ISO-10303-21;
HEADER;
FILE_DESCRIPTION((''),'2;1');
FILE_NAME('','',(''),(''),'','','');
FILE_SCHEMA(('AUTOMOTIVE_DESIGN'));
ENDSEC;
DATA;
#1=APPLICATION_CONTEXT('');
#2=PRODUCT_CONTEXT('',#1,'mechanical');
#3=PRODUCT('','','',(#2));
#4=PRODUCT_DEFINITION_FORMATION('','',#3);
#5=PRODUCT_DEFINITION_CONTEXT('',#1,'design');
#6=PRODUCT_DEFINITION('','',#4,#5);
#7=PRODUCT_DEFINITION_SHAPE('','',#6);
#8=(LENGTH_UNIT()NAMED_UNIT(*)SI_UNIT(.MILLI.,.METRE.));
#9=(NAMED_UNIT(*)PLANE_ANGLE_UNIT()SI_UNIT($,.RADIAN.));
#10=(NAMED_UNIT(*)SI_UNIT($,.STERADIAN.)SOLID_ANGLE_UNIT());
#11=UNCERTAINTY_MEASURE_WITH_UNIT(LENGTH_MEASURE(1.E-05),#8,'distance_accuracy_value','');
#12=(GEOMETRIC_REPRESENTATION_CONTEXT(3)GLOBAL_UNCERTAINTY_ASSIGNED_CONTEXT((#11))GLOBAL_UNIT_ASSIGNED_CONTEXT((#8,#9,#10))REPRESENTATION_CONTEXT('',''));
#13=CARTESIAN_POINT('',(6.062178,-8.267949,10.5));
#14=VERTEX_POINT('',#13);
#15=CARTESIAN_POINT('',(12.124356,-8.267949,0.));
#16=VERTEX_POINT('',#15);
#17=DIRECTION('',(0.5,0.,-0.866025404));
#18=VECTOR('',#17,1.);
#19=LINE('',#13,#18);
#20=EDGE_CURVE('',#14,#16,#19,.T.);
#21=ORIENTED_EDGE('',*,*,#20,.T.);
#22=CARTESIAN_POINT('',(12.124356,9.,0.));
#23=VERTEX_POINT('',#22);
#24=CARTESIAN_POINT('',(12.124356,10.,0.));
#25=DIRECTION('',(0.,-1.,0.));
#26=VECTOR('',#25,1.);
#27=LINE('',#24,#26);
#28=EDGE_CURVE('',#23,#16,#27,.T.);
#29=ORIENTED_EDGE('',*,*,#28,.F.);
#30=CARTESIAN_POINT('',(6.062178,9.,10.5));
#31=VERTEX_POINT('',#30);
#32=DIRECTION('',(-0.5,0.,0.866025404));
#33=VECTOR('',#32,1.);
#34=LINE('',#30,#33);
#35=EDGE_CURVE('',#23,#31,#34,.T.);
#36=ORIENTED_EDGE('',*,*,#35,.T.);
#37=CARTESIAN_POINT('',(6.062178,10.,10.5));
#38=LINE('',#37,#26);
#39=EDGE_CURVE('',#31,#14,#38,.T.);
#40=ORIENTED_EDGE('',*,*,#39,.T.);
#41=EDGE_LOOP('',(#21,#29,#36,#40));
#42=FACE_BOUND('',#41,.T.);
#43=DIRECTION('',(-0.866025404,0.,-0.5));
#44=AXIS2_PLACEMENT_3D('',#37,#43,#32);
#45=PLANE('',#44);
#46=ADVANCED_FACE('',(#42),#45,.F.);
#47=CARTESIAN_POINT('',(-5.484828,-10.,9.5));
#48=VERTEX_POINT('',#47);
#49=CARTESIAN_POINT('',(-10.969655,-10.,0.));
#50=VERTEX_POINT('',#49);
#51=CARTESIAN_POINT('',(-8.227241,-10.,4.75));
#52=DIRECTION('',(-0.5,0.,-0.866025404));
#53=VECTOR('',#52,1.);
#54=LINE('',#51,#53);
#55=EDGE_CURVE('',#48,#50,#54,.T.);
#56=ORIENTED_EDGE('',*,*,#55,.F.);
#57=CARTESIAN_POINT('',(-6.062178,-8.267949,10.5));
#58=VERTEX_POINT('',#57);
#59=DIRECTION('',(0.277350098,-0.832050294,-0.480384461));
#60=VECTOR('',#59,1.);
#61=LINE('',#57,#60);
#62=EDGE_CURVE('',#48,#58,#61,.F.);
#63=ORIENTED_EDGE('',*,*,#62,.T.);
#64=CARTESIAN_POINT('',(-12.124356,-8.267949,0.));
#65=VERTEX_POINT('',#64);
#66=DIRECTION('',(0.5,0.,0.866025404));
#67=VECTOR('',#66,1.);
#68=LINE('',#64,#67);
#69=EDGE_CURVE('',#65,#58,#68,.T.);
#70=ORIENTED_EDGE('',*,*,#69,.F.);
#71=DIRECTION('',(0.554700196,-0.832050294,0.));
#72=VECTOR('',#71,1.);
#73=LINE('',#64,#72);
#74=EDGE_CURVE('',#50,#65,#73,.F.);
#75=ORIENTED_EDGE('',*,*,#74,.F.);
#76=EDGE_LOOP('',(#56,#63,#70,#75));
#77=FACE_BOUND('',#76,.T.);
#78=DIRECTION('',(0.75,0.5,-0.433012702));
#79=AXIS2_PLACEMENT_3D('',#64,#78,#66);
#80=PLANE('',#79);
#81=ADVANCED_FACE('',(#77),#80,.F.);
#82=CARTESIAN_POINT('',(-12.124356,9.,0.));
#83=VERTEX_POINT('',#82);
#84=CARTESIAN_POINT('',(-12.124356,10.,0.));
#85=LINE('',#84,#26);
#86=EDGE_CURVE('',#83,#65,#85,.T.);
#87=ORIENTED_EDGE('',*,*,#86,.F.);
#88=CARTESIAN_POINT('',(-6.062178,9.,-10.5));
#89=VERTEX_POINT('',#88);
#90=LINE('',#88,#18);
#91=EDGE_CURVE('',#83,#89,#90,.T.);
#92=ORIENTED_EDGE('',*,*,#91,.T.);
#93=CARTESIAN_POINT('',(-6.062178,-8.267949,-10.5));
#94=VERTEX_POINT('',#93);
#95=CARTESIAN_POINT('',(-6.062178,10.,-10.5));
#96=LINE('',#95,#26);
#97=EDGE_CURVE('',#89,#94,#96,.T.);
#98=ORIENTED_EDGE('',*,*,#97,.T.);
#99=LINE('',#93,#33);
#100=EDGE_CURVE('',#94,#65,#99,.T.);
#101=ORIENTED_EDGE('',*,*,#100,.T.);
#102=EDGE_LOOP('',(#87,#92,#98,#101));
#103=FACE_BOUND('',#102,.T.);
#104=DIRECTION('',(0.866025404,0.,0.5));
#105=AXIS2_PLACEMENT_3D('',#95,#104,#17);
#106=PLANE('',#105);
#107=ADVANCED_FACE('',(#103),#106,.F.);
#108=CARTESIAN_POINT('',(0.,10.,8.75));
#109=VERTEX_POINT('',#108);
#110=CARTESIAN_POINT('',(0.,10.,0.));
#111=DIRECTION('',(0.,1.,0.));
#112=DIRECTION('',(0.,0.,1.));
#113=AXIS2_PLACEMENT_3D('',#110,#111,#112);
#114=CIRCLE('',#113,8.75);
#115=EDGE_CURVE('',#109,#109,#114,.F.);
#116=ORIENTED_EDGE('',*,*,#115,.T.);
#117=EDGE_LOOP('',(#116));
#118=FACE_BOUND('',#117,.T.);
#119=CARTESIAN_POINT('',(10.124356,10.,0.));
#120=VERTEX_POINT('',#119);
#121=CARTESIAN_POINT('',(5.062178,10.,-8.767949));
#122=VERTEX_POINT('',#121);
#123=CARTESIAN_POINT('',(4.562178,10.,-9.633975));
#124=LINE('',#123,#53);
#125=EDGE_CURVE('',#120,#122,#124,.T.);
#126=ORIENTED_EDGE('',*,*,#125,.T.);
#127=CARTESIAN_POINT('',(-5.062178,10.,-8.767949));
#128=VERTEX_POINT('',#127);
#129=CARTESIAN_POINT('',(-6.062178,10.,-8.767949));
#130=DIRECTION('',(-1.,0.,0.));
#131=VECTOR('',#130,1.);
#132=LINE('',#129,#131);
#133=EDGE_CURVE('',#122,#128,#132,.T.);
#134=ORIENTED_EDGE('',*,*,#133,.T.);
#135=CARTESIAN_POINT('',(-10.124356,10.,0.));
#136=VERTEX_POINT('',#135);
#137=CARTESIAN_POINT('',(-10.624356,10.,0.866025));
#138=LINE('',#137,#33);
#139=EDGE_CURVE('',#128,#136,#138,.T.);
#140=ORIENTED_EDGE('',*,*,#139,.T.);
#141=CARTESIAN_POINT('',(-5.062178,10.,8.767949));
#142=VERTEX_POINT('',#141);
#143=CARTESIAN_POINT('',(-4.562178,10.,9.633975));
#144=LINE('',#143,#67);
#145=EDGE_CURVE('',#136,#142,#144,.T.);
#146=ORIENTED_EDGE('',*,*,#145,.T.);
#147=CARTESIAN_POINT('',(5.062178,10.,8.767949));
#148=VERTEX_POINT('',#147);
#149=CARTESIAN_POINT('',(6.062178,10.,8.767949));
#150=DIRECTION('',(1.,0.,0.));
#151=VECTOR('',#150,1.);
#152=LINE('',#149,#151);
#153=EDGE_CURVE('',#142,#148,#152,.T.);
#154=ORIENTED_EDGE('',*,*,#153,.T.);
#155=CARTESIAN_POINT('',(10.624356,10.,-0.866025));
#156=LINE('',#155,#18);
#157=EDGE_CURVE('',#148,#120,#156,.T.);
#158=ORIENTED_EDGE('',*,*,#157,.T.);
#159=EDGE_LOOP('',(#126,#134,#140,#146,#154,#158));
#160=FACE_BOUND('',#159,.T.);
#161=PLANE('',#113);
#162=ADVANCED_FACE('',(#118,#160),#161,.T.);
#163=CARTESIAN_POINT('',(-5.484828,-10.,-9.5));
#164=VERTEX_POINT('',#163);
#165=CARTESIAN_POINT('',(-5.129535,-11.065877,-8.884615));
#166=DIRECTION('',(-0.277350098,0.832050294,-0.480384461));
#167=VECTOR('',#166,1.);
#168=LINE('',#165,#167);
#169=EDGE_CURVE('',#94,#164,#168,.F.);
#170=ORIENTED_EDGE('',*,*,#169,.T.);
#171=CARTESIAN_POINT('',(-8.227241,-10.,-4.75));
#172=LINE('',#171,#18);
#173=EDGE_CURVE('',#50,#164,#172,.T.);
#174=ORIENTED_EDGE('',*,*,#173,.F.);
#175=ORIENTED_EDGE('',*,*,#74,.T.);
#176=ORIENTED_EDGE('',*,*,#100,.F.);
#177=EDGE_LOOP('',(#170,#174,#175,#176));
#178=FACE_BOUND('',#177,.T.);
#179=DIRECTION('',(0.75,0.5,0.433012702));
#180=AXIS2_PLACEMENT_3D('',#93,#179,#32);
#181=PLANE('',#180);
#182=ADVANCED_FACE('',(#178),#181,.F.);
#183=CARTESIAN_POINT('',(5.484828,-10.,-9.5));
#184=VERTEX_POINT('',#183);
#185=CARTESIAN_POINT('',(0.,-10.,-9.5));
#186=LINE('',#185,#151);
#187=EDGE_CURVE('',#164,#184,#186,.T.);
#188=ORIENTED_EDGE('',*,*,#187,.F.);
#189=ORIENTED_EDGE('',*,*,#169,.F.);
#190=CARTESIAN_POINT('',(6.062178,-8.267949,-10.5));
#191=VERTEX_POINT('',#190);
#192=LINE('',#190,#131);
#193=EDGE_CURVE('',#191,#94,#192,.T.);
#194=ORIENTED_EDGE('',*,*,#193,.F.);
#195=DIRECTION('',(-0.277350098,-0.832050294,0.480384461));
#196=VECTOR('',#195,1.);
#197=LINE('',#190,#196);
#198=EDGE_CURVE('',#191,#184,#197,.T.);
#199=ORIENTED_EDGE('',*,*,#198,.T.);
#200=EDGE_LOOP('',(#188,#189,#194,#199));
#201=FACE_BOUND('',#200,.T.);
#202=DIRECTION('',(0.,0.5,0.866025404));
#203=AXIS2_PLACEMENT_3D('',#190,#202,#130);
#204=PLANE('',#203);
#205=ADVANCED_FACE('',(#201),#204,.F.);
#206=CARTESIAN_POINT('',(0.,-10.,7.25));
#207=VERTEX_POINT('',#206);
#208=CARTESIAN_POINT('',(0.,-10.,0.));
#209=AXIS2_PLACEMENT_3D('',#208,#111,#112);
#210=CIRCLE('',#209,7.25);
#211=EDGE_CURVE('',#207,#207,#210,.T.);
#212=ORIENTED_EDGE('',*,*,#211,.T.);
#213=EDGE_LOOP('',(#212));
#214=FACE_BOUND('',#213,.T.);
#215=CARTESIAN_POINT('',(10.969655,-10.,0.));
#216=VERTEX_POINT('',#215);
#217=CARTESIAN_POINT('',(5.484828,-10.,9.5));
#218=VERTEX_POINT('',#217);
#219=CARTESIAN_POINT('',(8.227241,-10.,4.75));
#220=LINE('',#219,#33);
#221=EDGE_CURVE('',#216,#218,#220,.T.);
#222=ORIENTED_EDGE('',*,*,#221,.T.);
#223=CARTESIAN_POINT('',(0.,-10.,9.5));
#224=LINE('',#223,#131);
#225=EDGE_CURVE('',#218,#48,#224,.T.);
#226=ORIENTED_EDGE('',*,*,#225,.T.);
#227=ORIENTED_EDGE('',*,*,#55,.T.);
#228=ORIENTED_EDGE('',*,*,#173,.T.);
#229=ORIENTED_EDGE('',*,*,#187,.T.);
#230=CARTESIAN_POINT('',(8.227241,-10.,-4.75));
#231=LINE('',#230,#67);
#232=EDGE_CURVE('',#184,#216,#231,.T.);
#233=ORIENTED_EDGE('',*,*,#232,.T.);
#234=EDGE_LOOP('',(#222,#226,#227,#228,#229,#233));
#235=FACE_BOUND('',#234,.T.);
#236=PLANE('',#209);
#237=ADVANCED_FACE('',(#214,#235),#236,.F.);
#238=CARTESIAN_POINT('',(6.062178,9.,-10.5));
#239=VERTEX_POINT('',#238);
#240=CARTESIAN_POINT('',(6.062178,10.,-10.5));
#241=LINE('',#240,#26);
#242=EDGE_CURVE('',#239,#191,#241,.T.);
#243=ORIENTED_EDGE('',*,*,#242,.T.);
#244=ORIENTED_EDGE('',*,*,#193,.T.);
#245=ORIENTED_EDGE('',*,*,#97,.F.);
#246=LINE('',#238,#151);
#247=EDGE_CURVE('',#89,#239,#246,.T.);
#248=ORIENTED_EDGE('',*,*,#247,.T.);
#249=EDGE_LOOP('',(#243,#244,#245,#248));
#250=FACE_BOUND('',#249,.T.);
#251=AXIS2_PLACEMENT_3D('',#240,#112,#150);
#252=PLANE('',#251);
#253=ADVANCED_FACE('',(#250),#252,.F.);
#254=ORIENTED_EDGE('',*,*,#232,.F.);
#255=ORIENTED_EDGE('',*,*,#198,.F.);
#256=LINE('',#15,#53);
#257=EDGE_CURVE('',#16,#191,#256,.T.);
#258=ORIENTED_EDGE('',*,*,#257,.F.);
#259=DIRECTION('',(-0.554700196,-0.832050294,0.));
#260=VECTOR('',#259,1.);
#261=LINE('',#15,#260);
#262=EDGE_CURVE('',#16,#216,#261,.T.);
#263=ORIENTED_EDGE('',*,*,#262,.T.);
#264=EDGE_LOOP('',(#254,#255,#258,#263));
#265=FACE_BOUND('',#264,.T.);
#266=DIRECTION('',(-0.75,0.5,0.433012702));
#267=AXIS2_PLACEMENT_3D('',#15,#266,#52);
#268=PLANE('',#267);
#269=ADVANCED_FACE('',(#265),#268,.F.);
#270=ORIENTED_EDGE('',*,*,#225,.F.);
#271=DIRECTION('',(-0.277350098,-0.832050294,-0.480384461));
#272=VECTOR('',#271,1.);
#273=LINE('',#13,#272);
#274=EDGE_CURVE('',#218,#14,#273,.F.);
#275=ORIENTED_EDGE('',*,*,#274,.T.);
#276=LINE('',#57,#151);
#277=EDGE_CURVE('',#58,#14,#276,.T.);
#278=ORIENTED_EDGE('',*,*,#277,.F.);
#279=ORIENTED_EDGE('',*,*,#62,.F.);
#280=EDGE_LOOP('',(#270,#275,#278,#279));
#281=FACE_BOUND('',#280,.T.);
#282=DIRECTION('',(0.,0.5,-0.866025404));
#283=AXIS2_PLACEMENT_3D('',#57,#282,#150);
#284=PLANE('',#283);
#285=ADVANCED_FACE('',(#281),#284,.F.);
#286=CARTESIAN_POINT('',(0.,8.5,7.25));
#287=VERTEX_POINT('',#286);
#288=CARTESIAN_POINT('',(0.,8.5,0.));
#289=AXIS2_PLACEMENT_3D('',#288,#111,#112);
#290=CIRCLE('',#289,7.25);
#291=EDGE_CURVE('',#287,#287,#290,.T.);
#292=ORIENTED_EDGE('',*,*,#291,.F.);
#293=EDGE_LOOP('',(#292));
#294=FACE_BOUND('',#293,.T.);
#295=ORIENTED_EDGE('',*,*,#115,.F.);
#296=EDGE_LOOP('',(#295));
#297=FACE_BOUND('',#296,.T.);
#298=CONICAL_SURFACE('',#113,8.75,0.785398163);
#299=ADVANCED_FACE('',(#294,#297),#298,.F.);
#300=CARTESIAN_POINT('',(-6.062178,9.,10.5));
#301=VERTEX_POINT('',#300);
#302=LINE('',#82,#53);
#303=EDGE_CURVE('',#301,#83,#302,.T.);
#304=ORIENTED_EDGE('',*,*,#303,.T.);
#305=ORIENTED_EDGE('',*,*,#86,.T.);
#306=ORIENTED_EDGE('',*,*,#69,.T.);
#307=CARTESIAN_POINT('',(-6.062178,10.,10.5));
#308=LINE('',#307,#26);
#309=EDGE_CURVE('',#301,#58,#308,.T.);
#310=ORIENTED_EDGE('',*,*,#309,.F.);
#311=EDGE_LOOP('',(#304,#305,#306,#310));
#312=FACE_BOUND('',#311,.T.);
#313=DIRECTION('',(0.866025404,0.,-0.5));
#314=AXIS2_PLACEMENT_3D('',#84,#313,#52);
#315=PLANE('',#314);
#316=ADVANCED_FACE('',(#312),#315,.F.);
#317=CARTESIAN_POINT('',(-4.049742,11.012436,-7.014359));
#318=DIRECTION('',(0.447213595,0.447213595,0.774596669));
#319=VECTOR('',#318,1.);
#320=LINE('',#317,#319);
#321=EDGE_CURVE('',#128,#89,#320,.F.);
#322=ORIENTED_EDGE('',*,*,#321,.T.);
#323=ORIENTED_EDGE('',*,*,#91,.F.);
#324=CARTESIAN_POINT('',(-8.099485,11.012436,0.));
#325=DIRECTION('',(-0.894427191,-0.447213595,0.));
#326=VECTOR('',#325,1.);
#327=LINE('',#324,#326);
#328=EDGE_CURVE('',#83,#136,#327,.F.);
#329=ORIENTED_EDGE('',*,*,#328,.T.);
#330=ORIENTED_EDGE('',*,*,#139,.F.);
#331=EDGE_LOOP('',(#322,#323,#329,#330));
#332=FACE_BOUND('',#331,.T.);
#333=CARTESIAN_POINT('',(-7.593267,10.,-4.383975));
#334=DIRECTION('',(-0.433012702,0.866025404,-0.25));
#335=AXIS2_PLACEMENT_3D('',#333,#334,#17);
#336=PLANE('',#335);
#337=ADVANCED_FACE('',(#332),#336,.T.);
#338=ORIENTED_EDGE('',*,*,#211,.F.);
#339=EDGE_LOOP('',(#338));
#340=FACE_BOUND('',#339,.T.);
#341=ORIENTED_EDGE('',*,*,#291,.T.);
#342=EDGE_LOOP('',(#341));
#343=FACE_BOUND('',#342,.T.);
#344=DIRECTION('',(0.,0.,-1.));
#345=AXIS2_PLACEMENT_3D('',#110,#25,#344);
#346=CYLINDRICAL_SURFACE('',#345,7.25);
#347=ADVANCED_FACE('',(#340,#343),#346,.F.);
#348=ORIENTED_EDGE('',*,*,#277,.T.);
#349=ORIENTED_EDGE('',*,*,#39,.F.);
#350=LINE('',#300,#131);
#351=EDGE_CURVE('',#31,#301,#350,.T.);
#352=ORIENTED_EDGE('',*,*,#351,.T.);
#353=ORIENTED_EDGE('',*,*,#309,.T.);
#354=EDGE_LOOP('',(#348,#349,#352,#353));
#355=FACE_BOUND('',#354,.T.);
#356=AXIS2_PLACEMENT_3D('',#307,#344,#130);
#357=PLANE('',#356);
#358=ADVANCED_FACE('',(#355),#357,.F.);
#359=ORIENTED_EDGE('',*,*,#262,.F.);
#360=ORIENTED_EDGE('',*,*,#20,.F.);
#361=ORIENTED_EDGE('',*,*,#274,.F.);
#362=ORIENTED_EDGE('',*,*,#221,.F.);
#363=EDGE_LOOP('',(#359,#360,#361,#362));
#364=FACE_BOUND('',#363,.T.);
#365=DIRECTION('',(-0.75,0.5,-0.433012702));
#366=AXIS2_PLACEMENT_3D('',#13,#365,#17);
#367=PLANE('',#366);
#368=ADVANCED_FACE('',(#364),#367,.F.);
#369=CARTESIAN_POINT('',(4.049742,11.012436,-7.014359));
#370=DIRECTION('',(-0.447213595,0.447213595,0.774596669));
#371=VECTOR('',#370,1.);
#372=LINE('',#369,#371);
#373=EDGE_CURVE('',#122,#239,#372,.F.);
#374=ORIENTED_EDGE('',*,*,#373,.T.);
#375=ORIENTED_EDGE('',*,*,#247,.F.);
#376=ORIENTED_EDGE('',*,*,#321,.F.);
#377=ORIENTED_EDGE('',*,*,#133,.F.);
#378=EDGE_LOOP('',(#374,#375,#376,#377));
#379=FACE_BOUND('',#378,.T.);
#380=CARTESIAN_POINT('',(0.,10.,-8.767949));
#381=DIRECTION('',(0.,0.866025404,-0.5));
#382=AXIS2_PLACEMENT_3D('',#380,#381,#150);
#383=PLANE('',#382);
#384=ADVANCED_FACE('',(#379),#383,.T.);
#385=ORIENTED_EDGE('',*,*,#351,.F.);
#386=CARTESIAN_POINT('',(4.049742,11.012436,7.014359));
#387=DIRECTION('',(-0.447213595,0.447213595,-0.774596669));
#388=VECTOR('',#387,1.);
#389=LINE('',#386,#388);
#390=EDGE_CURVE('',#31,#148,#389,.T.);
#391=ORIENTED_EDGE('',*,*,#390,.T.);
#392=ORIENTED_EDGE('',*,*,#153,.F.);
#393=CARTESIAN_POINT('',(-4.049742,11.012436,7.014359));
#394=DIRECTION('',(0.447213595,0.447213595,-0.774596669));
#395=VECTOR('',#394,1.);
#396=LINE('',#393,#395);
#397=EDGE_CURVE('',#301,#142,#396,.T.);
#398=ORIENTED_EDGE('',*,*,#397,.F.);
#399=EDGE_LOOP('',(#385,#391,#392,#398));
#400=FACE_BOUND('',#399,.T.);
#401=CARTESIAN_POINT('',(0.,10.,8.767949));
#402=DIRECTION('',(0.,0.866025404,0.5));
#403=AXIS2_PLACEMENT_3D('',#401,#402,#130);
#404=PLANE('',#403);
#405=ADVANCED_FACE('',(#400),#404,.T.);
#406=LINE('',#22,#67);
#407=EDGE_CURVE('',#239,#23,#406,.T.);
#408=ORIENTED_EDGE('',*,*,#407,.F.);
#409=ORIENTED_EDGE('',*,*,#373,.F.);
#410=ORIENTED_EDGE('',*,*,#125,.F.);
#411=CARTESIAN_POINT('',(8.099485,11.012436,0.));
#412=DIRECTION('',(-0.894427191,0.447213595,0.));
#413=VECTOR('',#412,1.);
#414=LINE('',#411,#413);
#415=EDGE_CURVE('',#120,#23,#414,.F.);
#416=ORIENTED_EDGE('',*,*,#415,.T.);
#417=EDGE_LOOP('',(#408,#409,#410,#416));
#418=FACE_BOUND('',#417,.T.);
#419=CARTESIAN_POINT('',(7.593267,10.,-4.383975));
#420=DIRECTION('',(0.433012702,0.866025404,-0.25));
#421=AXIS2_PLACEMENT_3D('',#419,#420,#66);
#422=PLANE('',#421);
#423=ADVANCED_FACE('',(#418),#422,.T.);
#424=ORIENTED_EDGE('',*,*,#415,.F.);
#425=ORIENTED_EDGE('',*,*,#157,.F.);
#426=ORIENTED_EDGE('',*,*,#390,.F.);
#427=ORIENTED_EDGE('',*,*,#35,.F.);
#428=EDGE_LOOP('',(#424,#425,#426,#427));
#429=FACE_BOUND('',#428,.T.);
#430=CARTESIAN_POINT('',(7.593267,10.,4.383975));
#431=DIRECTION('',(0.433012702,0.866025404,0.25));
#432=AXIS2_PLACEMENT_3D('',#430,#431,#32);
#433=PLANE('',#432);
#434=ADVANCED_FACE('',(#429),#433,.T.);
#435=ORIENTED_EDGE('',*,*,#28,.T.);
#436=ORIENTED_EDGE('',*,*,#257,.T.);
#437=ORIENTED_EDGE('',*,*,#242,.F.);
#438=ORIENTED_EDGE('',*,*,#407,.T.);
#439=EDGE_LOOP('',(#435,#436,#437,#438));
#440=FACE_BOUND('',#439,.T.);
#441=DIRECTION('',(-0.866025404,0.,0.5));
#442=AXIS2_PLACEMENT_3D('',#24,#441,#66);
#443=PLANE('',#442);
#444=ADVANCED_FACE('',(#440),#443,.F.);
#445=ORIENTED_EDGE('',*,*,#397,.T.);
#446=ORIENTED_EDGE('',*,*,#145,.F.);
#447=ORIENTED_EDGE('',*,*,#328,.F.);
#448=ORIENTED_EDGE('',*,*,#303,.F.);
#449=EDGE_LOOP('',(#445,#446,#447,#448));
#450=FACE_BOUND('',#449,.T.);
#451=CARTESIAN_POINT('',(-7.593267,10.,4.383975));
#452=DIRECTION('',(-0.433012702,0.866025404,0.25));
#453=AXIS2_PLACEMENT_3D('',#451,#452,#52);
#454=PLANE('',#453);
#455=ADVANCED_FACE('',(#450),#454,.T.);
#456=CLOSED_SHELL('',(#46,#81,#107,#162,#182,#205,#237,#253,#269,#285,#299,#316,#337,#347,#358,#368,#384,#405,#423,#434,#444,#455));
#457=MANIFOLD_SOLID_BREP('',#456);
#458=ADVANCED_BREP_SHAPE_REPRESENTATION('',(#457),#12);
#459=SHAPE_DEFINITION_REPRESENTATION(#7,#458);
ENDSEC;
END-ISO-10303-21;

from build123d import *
from OCP.BRepFilletAPI import BRepFilletAPI_MakeChamfer

# Parameters (mm, degrees)
SKETCH1_R           = 7.25
BOSS_EXTRUDE1_DEPTH = 10
CHAMFER2_SIZE       = 1
CHAMFER2_SIZE2      = 1.732050808


with BuildPart() as part:
    # Sketch1 → Boss-Extrude1 (new, symmetric)
    with BuildSketch(Plane(origin=(0, 0, 0), x_dir=(1, 0, 0), z_dir=(0, 1, 0))):
        Polygon((-12.124355653, 0), (-6.062177826, -10.5), (6.062177826, -10.5), (12.124355653, 0), (6.062177826, 10.5), (-6.062177826, 10.5), align=None)
        with Locations(Location((0, 0, 0), (0, 0, 270))):
            Circle(SKETCH1_R, mode=Mode.SUBTRACT)
    extrude(amount=BOSS_EXTRUDE1_DEPTH, both=True)

    # Chamfer1: read off the stored shape, not the designer's step
    # Chamfer1 outline → Chamfer1 (revolve, cut)
    with BuildSketch(Plane.XY):
        Polygon((7.25, 10), (7.25, 8.5), (8.75, 10), align=None)
    revolve(axis=Axis((0, 0, 0), (0, 1, 0)), mode=Mode.SUBTRACT)

    # Chamfer2: one chamfer whose edges measure the first distance from different faces: ONE call of the kernel's chamfer builder (chamfer() names one face for all edges)
    chamfer2_edges_1 = [part.edges().sort_by_distance(p)[0] for p in [
        (0, 10, 10.5),
    ]]
    chamfer2_side_1 = [part.faces().sort_by_distance(p)[0] for p in [
        (0, 0, 10.5),
    ]]
    chamfer2_edges_2 = [part.edges().sort_by_distance(p)[0] for p in [
        (9.09326674, 10, 5.25),
    ]]
    chamfer2_side_2 = [part.faces().sort_by_distance(p)[0] for p in [
        (9.09326674, 0, 5.25),
    ]]
    chamfer2_edges_3 = [part.edges().sort_by_distance(p)[0] for p in [
        (9.09326674, 10, -5.25),
    ]]
    chamfer2_side_3 = [part.faces().sort_by_distance(p)[0] for p in [
        (9.09326674, 0, -5.25),
    ]]
    chamfer2_edges_4 = [part.edges().sort_by_distance(p)[0] for p in [
        (0, 10, -10.5),
    ]]
    chamfer2_side_4 = [part.faces().sort_by_distance(p)[0] for p in [
        (0, 0, -10.5),
    ]]
    chamfer2_edges_5 = [part.edges().sort_by_distance(p)[0] for p in [
        (-9.09326674, 10, -5.25),
    ]]
    chamfer2_side_5 = [part.faces().sort_by_distance(p)[0] for p in [
        (-9.09326674, 0, -5.25),
    ]]
    chamfer2_edges_6 = [part.edges().sort_by_distance(p)[0] for p in [
        (0, -10, -10.5),
        (9.09326674, -10, -5.25),
        (9.09326674, -10, 5.25),
        (0, -10, 10.5),
        (-9.09326674, -10, 5.25),
        (-9.09326674, -10, -5.25),
    ]]
    chamfer2_side_6 = [part.faces().sort_by_distance(p)[0] for p in [
        (-8.815462852, -10, 5.089609851),
    ]]
    chamfer2_edges_7 = [part.edges().sort_by_distance(p)[0] for p in [
        (-9.09326674, 10, 5.25),
    ]]
    chamfer2_side_7 = [part.faces().sort_by_distance(p)[0] for p in [
        (-9.09326674, 0, 5.25),
    ]]
    chamfer2 = BRepFilletAPI_MakeChamfer(part.part.solid().wrapped)
    for e in chamfer2_edges_1:
        chamfer2.Add(CHAMFER2_SIZE, CHAMFER2_SIZE2, e.wrapped, chamfer2_side_1[0].wrapped)  # the first distance lies on this face
    for e in chamfer2_edges_2:
        chamfer2.Add(CHAMFER2_SIZE, CHAMFER2_SIZE2, e.wrapped, chamfer2_side_2[0].wrapped)  # the first distance lies on this face
    for e in chamfer2_edges_3:
        chamfer2.Add(CHAMFER2_SIZE, CHAMFER2_SIZE2, e.wrapped, chamfer2_side_3[0].wrapped)  # the first distance lies on this face
    for e in chamfer2_edges_4:
        chamfer2.Add(CHAMFER2_SIZE, CHAMFER2_SIZE2, e.wrapped, chamfer2_side_4[0].wrapped)  # the first distance lies on this face
    for e in chamfer2_edges_5:
        chamfer2.Add(CHAMFER2_SIZE, CHAMFER2_SIZE2, e.wrapped, chamfer2_side_5[0].wrapped)  # the first distance lies on this face
    for e in chamfer2_edges_6:
        chamfer2.Add(CHAMFER2_SIZE, CHAMFER2_SIZE2, e.wrapped, chamfer2_side_6[0].wrapped)  # the first distance lies on this face
    for e in chamfer2_edges_7:
        chamfer2.Add(CHAMFER2_SIZE, CHAMFER2_SIZE2, e.wrapped, chamfer2_side_7[0].wrapped)  # the first distance lies on this face
    add(Compound.cast(chamfer2.Shape()), mode=Mode.REPLACE)


solid = part.part
